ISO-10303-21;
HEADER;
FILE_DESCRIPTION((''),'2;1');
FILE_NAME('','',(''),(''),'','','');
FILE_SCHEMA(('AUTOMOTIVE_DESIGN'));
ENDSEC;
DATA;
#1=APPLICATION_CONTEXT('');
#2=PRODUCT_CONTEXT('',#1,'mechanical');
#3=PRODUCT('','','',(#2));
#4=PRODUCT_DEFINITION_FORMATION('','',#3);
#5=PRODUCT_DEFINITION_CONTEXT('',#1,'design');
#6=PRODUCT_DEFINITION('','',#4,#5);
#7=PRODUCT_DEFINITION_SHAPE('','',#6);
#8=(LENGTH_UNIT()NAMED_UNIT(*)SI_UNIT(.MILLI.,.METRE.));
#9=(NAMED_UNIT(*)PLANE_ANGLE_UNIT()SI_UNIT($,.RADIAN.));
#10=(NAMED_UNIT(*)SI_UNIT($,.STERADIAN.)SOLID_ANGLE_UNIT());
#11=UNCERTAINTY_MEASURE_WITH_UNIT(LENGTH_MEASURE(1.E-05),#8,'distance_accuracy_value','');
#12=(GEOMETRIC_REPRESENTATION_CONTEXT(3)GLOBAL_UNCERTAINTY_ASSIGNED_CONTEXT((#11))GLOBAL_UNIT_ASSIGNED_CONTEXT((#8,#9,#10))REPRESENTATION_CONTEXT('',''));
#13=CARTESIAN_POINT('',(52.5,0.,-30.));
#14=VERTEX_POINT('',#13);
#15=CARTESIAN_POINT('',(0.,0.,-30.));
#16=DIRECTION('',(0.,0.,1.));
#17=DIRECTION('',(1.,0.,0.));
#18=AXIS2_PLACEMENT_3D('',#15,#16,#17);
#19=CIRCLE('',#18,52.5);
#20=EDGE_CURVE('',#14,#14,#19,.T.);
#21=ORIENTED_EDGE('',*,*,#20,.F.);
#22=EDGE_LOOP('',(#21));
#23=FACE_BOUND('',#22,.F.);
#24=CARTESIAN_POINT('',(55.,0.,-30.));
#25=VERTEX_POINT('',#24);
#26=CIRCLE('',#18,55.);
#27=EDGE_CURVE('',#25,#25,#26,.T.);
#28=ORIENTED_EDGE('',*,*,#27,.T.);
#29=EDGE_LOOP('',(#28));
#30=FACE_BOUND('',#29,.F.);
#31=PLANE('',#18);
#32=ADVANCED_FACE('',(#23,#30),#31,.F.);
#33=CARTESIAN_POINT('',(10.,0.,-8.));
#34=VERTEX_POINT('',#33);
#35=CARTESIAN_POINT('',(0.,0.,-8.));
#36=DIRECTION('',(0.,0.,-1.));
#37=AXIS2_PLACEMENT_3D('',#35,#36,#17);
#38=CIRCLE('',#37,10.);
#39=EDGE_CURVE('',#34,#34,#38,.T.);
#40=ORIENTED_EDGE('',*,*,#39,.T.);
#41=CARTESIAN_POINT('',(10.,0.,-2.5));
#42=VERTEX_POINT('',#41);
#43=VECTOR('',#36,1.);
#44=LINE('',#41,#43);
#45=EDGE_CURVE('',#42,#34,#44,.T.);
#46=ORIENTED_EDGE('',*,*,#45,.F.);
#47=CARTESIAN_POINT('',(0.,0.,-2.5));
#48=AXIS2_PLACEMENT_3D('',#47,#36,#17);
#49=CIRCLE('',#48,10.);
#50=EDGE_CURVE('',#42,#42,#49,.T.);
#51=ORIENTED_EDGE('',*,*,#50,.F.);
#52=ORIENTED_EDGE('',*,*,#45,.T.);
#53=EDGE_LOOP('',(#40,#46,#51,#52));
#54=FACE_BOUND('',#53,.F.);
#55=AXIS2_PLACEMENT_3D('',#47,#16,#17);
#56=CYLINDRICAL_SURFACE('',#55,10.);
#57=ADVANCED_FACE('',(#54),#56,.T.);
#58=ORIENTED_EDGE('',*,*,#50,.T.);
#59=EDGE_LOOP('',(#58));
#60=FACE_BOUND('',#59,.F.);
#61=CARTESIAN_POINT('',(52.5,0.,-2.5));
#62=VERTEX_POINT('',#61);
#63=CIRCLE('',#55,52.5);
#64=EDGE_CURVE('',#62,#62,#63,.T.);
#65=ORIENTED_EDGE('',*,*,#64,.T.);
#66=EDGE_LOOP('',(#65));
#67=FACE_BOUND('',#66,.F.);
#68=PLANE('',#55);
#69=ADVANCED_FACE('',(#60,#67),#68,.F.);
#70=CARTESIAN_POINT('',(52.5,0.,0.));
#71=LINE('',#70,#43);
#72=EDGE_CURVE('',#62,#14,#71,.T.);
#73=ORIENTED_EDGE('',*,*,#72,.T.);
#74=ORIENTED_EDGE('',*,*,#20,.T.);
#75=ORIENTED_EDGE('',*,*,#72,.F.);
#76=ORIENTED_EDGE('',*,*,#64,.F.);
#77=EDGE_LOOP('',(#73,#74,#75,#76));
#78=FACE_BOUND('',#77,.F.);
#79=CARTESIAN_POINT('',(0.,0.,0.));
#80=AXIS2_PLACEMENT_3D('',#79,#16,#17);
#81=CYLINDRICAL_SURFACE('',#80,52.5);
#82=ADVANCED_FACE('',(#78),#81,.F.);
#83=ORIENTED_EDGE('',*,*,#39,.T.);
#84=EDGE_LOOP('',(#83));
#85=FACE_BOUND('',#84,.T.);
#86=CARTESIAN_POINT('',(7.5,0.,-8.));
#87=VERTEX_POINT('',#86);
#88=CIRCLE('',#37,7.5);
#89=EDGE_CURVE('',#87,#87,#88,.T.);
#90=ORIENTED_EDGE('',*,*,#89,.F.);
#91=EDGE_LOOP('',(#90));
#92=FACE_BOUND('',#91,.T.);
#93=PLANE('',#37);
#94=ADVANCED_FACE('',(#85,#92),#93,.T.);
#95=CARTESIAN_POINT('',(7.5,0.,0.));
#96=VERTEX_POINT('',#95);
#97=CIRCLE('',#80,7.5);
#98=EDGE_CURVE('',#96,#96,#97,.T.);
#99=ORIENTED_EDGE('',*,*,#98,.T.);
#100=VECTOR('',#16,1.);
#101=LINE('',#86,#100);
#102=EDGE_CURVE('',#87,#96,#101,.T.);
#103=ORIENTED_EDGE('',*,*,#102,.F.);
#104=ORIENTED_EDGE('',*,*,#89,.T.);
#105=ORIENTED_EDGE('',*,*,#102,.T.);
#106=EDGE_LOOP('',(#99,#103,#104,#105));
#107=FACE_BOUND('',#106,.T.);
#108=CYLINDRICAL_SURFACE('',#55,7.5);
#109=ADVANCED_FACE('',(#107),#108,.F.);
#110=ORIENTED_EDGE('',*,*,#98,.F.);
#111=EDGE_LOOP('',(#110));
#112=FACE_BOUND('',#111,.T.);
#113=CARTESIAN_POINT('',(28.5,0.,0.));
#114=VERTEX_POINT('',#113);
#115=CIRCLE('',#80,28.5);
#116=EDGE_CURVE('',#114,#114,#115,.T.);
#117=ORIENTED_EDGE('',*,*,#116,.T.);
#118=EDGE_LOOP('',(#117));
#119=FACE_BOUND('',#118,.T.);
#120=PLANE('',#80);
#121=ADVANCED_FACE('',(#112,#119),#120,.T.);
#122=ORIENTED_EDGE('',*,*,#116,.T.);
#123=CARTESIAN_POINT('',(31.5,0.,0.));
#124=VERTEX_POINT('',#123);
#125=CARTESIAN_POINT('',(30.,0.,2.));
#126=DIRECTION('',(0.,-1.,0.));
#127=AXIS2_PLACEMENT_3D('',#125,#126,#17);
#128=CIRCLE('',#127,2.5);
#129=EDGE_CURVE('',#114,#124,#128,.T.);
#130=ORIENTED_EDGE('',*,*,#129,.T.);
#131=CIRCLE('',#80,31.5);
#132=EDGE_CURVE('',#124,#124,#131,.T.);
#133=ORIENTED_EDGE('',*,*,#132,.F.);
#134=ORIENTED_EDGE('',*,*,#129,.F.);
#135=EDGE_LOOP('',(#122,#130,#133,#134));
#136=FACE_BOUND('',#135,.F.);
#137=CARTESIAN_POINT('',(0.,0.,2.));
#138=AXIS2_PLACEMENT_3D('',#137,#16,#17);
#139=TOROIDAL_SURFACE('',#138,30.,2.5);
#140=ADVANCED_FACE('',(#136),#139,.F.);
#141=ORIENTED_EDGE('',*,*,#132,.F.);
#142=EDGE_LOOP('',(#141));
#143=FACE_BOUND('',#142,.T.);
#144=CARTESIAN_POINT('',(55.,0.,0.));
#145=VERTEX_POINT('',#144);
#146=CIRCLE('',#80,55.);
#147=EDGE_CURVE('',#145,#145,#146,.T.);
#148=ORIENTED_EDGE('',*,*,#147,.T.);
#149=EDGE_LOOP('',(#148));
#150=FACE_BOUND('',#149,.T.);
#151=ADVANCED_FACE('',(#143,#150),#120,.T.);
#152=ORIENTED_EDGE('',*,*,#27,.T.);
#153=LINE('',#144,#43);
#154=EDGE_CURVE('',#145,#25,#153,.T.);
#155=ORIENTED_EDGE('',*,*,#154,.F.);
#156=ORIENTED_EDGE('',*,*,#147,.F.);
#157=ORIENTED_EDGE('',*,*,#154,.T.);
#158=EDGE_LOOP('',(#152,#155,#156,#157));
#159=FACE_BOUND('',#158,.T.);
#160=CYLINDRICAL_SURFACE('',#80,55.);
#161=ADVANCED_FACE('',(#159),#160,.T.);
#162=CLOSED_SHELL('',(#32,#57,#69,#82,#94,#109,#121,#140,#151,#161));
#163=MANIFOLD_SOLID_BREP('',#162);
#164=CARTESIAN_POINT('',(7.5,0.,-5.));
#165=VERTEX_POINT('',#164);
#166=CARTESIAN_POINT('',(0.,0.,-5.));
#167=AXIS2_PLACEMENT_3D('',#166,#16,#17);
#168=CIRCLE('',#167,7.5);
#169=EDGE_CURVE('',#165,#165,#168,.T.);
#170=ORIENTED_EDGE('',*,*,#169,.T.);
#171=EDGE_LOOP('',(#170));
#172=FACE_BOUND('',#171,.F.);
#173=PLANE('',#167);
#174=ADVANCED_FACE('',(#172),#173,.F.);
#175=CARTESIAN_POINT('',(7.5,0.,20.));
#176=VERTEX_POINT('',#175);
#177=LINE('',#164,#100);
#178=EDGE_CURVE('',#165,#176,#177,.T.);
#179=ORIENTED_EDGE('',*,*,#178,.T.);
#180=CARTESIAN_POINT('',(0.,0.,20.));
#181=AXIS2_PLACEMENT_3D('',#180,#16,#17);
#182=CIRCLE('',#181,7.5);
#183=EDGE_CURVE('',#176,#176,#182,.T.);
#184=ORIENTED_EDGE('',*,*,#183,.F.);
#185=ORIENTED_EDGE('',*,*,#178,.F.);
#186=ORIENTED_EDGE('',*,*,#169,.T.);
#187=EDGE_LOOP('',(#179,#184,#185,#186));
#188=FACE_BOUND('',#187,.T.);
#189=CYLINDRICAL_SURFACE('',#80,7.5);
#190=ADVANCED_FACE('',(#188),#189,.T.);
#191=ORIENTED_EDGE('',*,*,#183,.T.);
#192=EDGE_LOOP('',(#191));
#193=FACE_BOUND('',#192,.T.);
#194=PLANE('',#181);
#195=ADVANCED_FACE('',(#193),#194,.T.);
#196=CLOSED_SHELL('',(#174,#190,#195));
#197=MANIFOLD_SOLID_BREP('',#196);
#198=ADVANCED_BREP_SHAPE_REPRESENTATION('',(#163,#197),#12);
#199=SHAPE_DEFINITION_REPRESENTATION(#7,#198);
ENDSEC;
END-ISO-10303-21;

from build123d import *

# Parameters (mm, degrees)
F0_R          = 55
F0_R_2        = 7.5
F1_DEPTH      = 30
F2_T          = -2.5
F4_R          = 2.5
F3_R          = 7.5
F6_DEPTH      = 20
F6_DEPTH_BACK = 5
F7_R          = 10
F7_R_2        = 7.5
F8_DEPTH      = 5.5


with BuildPart() as f1:
    # F0 (on Top) → F1 (new body)
    with BuildSketch(Plane.XY):
        Circle(F0_R)
        Circle(F0_R_2, mode=Mode.SUBTRACT)
    extrude(amount=-F1_DEPTH)

    # F2
    f2_openings = [f1.faces().sort_by_distance(p)[0] for p in [
        (-53.444365, 0, -30),
        (-7.5, 0, -15),
    ]]
    offset(amount=F2_T, openings=f2_openings)

    # F5: sweep along a path in F3
    with BuildLine(Plane.XY) as f5_path:
        CenterArc((0, 0), 30, 0, 360)
    # F4 (on Front) → F5 (sweep, cut)
    with BuildSketch(Plane.XZ):
        with Locations((30, 2)):
            Circle(F4_R)
    sweep(path=f5_path.line, mode=Mode.SUBTRACT)

    # F7 (on face) → F8 (join)
    with BuildSketch(Plane(origin=(0, 0, -2.5), x_dir=(1, 0, 0), z_dir=(0, 0, -1))):
        Circle(F7_R)
        Circle(F7_R_2, mode=Mode.SUBTRACT)
    extrude(amount=F8_DEPTH)


with BuildPart() as f6:
    # F3 (on face) → F6 (new body, two sides)
    with BuildSketch(Plane.XY) as f6_sk:
        Circle(F3_R)
    extrude(amount=F6_DEPTH)
    extrude(f6_sk.sketch, amount=-F6_DEPTH_BACK)


solid = Compound([f1.part, f6.part])
